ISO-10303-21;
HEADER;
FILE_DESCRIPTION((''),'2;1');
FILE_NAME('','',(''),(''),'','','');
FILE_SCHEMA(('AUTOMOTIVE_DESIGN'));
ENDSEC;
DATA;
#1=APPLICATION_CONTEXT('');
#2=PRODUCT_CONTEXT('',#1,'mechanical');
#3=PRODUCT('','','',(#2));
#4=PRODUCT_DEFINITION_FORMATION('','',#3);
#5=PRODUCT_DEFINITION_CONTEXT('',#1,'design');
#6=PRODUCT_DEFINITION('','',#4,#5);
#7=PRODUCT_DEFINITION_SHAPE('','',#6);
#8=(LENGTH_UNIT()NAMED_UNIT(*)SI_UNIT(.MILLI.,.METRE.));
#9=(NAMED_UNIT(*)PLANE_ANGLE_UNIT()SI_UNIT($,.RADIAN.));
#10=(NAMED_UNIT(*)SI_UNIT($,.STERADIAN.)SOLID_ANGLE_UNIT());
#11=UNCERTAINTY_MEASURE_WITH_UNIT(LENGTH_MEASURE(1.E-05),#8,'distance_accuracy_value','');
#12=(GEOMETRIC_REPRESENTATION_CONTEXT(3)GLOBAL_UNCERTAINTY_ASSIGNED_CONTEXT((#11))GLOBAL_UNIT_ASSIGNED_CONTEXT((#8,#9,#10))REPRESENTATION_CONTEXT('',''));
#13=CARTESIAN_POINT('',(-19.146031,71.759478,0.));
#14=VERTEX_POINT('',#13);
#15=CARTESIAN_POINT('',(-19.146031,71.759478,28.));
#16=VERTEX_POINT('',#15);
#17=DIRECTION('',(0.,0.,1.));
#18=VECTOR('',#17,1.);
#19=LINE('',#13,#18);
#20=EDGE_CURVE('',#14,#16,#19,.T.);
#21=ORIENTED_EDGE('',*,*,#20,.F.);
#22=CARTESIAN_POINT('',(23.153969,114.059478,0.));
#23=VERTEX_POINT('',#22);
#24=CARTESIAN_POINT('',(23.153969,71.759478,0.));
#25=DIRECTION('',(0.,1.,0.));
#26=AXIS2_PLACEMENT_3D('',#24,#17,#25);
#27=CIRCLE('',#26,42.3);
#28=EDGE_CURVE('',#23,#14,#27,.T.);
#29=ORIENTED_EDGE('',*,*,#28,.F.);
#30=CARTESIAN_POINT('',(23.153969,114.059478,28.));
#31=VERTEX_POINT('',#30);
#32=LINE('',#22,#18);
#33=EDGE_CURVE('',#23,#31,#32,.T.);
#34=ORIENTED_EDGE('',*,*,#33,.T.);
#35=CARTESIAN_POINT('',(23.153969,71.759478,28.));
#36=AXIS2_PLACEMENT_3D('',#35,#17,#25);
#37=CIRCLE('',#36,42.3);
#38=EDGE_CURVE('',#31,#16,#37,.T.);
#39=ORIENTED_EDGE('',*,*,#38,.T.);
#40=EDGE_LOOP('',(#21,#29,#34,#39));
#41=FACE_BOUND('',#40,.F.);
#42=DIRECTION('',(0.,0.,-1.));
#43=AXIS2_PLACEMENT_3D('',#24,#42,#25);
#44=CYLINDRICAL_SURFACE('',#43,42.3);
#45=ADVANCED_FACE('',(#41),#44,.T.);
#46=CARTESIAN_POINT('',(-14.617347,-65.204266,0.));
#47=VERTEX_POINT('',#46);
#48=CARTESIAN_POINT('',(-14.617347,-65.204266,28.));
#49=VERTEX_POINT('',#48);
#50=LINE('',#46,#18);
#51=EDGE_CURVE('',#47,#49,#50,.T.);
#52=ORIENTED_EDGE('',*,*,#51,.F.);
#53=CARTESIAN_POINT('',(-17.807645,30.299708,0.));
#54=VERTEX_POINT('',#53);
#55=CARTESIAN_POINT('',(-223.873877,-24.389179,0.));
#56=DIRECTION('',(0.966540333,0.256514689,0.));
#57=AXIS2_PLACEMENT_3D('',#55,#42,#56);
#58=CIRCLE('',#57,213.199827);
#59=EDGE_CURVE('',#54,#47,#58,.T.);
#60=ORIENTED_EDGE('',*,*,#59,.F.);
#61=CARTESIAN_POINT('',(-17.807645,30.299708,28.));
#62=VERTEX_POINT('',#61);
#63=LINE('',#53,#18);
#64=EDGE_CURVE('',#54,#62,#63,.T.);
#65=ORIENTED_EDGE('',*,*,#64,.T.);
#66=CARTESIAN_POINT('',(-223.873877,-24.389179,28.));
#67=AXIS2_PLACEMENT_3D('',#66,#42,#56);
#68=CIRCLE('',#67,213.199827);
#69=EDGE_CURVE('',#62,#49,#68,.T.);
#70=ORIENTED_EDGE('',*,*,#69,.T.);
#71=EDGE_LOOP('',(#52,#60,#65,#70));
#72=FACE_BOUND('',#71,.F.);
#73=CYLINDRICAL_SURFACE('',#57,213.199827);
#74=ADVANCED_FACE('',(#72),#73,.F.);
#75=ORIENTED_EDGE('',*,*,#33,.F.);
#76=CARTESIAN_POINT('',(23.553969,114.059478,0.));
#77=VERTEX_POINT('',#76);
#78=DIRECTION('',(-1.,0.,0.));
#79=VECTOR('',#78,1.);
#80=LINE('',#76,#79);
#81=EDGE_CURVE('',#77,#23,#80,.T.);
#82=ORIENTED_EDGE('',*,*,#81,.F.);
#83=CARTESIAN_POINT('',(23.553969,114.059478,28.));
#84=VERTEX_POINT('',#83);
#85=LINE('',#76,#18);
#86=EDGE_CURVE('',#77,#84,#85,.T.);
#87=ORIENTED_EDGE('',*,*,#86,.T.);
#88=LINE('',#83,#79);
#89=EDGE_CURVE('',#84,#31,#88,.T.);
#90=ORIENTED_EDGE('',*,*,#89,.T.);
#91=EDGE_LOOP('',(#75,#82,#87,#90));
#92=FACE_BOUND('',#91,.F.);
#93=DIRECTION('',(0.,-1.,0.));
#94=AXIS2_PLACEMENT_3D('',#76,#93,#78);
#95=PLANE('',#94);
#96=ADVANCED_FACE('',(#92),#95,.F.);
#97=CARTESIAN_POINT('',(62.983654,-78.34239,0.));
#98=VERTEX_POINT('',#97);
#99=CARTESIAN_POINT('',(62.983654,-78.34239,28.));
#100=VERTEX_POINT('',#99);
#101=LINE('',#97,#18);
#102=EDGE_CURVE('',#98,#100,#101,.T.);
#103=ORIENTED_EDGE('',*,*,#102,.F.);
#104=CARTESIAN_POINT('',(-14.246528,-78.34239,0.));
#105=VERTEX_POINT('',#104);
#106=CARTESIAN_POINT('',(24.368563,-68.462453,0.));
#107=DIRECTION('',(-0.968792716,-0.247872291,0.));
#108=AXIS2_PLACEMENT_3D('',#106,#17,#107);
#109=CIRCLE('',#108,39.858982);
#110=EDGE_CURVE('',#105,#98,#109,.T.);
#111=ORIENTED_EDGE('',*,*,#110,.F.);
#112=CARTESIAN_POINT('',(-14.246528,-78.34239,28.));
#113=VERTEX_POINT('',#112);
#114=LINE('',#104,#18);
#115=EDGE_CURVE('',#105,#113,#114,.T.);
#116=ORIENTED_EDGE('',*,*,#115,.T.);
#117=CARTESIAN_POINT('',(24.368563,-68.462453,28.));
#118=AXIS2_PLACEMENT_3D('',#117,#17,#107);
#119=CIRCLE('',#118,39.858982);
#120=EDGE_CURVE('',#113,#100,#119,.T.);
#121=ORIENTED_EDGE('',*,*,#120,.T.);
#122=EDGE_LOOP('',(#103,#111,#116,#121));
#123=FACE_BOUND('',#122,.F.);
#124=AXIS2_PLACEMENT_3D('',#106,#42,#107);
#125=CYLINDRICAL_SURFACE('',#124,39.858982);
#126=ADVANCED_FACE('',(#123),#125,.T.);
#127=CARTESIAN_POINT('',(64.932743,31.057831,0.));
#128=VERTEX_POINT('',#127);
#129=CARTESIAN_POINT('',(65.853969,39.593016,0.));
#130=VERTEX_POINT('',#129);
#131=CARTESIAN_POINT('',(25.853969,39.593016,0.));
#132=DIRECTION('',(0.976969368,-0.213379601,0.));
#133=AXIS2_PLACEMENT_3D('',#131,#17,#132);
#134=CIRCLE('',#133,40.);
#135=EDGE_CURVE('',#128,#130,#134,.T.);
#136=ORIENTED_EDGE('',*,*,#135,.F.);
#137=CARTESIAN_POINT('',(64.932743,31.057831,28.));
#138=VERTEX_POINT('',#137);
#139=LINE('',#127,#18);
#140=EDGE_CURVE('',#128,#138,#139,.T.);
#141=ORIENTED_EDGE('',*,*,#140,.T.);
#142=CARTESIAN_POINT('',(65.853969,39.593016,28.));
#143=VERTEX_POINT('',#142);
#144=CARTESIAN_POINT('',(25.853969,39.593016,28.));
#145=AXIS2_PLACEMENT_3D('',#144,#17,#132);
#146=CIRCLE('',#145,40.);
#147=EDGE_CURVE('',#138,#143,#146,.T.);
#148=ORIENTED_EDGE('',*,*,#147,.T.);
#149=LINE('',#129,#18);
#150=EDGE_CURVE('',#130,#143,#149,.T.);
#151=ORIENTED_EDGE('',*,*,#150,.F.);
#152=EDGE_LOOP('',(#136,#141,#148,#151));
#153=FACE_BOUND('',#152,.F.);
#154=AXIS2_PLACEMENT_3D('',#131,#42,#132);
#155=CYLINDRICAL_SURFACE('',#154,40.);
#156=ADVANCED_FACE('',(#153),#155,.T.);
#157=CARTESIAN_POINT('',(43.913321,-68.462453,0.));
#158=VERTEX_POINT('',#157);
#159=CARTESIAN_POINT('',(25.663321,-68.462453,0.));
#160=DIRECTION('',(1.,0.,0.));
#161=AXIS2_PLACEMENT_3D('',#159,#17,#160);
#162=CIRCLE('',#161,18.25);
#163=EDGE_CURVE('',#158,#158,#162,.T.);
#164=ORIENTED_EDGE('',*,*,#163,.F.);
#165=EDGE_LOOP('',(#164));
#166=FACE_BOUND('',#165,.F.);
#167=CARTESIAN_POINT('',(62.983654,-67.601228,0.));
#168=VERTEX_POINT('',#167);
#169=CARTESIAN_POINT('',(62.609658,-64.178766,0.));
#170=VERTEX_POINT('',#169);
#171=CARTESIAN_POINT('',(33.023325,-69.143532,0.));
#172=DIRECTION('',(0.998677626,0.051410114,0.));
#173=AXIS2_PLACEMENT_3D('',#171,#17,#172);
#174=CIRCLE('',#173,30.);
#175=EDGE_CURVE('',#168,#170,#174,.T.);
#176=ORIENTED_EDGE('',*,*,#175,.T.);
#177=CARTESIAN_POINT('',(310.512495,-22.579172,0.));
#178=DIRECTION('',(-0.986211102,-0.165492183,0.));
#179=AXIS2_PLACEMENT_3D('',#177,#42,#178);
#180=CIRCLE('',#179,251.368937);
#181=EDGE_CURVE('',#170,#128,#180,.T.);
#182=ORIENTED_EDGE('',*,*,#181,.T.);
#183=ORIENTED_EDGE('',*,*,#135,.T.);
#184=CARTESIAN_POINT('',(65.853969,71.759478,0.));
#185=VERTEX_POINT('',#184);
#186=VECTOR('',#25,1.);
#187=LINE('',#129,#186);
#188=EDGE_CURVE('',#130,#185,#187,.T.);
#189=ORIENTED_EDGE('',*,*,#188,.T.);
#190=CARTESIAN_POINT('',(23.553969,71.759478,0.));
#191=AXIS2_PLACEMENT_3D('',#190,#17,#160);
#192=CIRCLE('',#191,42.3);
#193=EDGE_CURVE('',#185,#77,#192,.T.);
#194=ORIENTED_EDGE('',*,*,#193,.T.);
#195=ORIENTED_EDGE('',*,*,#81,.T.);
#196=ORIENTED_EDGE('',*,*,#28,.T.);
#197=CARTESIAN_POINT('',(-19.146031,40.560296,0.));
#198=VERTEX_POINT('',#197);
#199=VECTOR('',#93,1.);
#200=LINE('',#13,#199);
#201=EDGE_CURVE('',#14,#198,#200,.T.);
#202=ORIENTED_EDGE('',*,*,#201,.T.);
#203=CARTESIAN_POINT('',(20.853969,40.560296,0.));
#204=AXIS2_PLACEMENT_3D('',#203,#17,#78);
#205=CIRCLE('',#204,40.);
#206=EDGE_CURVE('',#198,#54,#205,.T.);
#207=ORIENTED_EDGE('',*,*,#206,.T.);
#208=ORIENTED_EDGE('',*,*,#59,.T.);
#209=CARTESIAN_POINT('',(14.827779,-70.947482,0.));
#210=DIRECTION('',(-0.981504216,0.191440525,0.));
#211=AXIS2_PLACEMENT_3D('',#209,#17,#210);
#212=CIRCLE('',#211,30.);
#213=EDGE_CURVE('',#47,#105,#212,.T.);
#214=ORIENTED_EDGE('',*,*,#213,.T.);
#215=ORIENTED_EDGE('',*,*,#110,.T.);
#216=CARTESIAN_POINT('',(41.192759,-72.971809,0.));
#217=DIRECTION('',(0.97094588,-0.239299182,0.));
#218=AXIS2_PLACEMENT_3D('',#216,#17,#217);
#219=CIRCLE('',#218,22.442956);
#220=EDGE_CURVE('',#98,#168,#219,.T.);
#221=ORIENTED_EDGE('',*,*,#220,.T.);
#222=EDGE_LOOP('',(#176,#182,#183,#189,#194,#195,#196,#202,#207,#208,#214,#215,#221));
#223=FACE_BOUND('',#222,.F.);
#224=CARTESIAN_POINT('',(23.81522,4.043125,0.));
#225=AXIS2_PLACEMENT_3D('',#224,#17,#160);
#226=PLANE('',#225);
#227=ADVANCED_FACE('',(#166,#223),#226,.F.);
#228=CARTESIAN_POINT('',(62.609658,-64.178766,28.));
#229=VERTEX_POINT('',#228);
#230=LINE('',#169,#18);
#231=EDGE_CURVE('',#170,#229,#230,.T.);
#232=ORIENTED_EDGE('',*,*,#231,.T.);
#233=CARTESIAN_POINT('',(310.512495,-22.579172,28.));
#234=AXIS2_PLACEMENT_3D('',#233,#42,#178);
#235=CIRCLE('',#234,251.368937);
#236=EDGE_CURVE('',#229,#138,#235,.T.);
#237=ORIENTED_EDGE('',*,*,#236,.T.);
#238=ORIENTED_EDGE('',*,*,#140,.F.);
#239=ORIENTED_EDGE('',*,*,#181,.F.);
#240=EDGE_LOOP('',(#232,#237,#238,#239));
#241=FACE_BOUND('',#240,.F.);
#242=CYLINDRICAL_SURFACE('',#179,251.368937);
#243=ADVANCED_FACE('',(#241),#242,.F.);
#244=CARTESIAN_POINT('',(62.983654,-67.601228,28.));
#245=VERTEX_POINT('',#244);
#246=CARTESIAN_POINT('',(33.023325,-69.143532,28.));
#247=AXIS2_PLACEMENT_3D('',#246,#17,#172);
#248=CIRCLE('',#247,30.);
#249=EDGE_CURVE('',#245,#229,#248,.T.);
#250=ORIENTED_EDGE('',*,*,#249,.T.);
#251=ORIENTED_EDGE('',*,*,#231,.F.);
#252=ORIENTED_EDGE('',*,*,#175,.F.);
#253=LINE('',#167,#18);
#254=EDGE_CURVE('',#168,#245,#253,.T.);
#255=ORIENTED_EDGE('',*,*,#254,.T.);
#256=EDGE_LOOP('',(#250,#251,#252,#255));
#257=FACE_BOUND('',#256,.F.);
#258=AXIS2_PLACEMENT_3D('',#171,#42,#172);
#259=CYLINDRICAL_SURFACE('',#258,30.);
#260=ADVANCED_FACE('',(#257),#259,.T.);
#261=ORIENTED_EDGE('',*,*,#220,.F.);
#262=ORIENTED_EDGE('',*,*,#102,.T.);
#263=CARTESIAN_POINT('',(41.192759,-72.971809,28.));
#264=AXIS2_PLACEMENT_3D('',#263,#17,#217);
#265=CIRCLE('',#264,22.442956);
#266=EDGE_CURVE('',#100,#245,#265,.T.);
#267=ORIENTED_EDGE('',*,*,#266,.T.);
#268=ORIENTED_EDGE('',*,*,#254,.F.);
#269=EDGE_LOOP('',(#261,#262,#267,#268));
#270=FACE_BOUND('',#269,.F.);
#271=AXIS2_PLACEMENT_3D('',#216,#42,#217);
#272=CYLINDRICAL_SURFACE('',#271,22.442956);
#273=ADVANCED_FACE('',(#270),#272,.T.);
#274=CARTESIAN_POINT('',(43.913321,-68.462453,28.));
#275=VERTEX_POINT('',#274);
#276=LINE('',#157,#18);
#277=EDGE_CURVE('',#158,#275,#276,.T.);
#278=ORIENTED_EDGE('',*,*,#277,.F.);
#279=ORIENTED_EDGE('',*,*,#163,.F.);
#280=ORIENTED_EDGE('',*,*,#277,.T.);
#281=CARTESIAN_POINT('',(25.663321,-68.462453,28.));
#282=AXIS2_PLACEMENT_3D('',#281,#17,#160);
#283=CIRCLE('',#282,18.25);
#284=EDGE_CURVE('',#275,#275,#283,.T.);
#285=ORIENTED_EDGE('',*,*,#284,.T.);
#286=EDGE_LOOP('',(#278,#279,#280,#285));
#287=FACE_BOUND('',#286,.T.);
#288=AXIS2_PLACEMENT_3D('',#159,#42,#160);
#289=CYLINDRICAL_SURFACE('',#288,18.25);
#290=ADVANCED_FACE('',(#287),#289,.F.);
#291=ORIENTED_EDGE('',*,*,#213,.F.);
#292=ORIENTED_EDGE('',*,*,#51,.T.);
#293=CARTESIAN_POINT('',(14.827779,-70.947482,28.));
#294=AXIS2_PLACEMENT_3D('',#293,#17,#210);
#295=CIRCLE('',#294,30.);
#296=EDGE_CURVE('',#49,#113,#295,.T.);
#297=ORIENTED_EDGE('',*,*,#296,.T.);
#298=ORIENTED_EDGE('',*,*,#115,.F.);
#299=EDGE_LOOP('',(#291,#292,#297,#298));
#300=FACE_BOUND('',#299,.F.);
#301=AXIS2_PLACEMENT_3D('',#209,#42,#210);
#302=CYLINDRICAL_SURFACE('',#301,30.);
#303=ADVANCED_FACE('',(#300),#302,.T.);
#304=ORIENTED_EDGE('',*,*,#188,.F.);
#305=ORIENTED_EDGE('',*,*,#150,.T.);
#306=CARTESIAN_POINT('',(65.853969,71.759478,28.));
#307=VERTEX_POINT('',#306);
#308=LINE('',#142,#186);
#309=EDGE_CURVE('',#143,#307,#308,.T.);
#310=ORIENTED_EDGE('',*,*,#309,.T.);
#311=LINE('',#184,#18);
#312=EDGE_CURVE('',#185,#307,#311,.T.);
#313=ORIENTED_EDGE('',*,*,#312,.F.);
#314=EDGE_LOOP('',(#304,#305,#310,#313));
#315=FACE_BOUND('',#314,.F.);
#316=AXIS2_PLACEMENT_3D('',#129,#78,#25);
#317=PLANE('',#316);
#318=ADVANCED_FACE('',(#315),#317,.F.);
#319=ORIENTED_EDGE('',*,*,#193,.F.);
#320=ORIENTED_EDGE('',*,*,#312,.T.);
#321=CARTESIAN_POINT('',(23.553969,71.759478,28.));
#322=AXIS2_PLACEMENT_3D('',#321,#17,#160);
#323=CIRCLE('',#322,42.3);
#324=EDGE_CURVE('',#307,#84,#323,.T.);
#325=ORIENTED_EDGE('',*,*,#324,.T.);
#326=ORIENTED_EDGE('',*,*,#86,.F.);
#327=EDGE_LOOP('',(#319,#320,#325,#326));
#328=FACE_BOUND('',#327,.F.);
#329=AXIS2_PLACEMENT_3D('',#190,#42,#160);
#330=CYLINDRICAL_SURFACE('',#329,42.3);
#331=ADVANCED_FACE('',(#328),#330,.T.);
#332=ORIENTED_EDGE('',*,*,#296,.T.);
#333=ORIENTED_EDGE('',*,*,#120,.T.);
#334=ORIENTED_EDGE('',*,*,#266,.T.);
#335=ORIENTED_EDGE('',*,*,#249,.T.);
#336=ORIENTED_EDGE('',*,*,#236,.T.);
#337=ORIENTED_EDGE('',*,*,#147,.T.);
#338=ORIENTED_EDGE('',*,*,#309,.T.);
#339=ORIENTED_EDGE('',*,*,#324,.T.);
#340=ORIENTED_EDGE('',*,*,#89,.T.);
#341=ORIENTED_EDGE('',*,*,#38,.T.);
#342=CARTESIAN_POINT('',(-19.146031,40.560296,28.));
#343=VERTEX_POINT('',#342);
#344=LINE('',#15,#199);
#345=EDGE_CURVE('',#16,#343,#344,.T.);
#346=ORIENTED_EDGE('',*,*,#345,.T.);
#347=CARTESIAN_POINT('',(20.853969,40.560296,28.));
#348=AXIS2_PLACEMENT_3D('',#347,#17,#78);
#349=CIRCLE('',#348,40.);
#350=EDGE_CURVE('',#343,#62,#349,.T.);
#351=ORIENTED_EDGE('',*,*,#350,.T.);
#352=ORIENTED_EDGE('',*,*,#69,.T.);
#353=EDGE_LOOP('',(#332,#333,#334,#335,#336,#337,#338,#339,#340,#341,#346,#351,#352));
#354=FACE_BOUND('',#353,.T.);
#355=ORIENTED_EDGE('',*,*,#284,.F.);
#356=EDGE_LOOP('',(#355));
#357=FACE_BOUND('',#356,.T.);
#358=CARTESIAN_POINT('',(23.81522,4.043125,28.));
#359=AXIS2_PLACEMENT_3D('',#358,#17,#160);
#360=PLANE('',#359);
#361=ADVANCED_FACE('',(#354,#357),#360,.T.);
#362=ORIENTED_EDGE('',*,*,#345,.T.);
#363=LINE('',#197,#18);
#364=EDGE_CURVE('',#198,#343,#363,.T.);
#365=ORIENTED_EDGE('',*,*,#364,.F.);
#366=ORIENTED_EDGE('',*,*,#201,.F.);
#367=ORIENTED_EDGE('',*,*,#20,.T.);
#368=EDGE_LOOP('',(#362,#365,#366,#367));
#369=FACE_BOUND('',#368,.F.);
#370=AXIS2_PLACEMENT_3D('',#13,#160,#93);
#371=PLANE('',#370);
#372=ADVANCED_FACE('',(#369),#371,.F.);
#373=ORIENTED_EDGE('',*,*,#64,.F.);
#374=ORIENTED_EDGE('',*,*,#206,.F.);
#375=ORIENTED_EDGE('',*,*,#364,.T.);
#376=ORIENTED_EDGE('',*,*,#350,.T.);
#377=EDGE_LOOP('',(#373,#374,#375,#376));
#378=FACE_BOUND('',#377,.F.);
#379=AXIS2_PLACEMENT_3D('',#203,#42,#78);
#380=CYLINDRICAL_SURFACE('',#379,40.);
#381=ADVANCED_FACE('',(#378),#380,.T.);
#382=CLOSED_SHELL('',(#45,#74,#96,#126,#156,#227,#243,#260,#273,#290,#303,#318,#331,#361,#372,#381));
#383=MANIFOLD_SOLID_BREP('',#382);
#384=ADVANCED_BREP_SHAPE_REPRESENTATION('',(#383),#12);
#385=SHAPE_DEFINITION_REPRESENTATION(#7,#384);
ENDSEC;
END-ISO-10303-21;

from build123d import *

# Parameters (mm, degrees)
F0_R     = 18.25
F1_DEPTH = 28


# Not quite as in the source:
# - a feature names something its author has since deleted; it is built from what else it names


with BuildPart() as f1:
    # F0 (on Top) → F1 (new body)
    with BuildSketch(Plane.XY):
        with BuildLine():
            Line((23.5539685776, 114.0594776705), (23.1539685776, 114.0594776705))
            ThreePointArc((23.1539685776, 114.0594776705), (-6.7566482666, 101.6700945147), (-19.1460314224, 71.7594776705))
            Line((-19.1460314224, 71.7594776705), (-19.1460314224, 40.5602956202))
            ThreePointArc((-19.1460314224, 40.5602956202), (-18.8100234812, 35.3865412816), (-17.8076447246, 30.2997080702))
            ThreePointArc((-17.8076447246, 30.2997080702), (-10.7929031817, -17.2712382489), (-14.6173474127, -65.2042660996))
            ThreePointArc((-14.6173474127, -65.2042660996), (-15.16027858, -71.7938854137), (-14.2465279536, -78.3423903385))
            ThreePointArc((-14.2465279536, -78.3423903385), (24.3685631197, -108.3214348669), (62.983654193, -78.3423903385))
            ThreePointArc((62.983654193, -78.3423903385), (63.6357145351, -72.9718093248), (62.983654193, -67.6012283111))
            ThreePointArc((62.983654193, -67.6012283111), (62.8457925436, -65.8846278256), (62.6096584736, -64.1787662362))
            ThreePointArc((62.6096584736, -64.1787662362), (59.2183076196, -16.4494096847), (64.932743293, 31.0578314726))
            ThreePointArc((64.932743293, 31.0578314726), (65.6229953988, 35.3006378942), (65.8539685776, 39.593015521))
            Line((65.8539685776, 39.593015521), (65.8539685776, 71.7594776705))
            ThreePointArc((65.8539685776, 71.7594776705), (53.4645854218, 101.6700945147), (23.5539685776, 114.0594776705))
        make_face()
        with Locations((25.6633214675, -68.4624532511)):
            Circle(F0_R, mode=Mode.SUBTRACT)
    extrude(amount=F1_DEPTH)


solid = f1.part
